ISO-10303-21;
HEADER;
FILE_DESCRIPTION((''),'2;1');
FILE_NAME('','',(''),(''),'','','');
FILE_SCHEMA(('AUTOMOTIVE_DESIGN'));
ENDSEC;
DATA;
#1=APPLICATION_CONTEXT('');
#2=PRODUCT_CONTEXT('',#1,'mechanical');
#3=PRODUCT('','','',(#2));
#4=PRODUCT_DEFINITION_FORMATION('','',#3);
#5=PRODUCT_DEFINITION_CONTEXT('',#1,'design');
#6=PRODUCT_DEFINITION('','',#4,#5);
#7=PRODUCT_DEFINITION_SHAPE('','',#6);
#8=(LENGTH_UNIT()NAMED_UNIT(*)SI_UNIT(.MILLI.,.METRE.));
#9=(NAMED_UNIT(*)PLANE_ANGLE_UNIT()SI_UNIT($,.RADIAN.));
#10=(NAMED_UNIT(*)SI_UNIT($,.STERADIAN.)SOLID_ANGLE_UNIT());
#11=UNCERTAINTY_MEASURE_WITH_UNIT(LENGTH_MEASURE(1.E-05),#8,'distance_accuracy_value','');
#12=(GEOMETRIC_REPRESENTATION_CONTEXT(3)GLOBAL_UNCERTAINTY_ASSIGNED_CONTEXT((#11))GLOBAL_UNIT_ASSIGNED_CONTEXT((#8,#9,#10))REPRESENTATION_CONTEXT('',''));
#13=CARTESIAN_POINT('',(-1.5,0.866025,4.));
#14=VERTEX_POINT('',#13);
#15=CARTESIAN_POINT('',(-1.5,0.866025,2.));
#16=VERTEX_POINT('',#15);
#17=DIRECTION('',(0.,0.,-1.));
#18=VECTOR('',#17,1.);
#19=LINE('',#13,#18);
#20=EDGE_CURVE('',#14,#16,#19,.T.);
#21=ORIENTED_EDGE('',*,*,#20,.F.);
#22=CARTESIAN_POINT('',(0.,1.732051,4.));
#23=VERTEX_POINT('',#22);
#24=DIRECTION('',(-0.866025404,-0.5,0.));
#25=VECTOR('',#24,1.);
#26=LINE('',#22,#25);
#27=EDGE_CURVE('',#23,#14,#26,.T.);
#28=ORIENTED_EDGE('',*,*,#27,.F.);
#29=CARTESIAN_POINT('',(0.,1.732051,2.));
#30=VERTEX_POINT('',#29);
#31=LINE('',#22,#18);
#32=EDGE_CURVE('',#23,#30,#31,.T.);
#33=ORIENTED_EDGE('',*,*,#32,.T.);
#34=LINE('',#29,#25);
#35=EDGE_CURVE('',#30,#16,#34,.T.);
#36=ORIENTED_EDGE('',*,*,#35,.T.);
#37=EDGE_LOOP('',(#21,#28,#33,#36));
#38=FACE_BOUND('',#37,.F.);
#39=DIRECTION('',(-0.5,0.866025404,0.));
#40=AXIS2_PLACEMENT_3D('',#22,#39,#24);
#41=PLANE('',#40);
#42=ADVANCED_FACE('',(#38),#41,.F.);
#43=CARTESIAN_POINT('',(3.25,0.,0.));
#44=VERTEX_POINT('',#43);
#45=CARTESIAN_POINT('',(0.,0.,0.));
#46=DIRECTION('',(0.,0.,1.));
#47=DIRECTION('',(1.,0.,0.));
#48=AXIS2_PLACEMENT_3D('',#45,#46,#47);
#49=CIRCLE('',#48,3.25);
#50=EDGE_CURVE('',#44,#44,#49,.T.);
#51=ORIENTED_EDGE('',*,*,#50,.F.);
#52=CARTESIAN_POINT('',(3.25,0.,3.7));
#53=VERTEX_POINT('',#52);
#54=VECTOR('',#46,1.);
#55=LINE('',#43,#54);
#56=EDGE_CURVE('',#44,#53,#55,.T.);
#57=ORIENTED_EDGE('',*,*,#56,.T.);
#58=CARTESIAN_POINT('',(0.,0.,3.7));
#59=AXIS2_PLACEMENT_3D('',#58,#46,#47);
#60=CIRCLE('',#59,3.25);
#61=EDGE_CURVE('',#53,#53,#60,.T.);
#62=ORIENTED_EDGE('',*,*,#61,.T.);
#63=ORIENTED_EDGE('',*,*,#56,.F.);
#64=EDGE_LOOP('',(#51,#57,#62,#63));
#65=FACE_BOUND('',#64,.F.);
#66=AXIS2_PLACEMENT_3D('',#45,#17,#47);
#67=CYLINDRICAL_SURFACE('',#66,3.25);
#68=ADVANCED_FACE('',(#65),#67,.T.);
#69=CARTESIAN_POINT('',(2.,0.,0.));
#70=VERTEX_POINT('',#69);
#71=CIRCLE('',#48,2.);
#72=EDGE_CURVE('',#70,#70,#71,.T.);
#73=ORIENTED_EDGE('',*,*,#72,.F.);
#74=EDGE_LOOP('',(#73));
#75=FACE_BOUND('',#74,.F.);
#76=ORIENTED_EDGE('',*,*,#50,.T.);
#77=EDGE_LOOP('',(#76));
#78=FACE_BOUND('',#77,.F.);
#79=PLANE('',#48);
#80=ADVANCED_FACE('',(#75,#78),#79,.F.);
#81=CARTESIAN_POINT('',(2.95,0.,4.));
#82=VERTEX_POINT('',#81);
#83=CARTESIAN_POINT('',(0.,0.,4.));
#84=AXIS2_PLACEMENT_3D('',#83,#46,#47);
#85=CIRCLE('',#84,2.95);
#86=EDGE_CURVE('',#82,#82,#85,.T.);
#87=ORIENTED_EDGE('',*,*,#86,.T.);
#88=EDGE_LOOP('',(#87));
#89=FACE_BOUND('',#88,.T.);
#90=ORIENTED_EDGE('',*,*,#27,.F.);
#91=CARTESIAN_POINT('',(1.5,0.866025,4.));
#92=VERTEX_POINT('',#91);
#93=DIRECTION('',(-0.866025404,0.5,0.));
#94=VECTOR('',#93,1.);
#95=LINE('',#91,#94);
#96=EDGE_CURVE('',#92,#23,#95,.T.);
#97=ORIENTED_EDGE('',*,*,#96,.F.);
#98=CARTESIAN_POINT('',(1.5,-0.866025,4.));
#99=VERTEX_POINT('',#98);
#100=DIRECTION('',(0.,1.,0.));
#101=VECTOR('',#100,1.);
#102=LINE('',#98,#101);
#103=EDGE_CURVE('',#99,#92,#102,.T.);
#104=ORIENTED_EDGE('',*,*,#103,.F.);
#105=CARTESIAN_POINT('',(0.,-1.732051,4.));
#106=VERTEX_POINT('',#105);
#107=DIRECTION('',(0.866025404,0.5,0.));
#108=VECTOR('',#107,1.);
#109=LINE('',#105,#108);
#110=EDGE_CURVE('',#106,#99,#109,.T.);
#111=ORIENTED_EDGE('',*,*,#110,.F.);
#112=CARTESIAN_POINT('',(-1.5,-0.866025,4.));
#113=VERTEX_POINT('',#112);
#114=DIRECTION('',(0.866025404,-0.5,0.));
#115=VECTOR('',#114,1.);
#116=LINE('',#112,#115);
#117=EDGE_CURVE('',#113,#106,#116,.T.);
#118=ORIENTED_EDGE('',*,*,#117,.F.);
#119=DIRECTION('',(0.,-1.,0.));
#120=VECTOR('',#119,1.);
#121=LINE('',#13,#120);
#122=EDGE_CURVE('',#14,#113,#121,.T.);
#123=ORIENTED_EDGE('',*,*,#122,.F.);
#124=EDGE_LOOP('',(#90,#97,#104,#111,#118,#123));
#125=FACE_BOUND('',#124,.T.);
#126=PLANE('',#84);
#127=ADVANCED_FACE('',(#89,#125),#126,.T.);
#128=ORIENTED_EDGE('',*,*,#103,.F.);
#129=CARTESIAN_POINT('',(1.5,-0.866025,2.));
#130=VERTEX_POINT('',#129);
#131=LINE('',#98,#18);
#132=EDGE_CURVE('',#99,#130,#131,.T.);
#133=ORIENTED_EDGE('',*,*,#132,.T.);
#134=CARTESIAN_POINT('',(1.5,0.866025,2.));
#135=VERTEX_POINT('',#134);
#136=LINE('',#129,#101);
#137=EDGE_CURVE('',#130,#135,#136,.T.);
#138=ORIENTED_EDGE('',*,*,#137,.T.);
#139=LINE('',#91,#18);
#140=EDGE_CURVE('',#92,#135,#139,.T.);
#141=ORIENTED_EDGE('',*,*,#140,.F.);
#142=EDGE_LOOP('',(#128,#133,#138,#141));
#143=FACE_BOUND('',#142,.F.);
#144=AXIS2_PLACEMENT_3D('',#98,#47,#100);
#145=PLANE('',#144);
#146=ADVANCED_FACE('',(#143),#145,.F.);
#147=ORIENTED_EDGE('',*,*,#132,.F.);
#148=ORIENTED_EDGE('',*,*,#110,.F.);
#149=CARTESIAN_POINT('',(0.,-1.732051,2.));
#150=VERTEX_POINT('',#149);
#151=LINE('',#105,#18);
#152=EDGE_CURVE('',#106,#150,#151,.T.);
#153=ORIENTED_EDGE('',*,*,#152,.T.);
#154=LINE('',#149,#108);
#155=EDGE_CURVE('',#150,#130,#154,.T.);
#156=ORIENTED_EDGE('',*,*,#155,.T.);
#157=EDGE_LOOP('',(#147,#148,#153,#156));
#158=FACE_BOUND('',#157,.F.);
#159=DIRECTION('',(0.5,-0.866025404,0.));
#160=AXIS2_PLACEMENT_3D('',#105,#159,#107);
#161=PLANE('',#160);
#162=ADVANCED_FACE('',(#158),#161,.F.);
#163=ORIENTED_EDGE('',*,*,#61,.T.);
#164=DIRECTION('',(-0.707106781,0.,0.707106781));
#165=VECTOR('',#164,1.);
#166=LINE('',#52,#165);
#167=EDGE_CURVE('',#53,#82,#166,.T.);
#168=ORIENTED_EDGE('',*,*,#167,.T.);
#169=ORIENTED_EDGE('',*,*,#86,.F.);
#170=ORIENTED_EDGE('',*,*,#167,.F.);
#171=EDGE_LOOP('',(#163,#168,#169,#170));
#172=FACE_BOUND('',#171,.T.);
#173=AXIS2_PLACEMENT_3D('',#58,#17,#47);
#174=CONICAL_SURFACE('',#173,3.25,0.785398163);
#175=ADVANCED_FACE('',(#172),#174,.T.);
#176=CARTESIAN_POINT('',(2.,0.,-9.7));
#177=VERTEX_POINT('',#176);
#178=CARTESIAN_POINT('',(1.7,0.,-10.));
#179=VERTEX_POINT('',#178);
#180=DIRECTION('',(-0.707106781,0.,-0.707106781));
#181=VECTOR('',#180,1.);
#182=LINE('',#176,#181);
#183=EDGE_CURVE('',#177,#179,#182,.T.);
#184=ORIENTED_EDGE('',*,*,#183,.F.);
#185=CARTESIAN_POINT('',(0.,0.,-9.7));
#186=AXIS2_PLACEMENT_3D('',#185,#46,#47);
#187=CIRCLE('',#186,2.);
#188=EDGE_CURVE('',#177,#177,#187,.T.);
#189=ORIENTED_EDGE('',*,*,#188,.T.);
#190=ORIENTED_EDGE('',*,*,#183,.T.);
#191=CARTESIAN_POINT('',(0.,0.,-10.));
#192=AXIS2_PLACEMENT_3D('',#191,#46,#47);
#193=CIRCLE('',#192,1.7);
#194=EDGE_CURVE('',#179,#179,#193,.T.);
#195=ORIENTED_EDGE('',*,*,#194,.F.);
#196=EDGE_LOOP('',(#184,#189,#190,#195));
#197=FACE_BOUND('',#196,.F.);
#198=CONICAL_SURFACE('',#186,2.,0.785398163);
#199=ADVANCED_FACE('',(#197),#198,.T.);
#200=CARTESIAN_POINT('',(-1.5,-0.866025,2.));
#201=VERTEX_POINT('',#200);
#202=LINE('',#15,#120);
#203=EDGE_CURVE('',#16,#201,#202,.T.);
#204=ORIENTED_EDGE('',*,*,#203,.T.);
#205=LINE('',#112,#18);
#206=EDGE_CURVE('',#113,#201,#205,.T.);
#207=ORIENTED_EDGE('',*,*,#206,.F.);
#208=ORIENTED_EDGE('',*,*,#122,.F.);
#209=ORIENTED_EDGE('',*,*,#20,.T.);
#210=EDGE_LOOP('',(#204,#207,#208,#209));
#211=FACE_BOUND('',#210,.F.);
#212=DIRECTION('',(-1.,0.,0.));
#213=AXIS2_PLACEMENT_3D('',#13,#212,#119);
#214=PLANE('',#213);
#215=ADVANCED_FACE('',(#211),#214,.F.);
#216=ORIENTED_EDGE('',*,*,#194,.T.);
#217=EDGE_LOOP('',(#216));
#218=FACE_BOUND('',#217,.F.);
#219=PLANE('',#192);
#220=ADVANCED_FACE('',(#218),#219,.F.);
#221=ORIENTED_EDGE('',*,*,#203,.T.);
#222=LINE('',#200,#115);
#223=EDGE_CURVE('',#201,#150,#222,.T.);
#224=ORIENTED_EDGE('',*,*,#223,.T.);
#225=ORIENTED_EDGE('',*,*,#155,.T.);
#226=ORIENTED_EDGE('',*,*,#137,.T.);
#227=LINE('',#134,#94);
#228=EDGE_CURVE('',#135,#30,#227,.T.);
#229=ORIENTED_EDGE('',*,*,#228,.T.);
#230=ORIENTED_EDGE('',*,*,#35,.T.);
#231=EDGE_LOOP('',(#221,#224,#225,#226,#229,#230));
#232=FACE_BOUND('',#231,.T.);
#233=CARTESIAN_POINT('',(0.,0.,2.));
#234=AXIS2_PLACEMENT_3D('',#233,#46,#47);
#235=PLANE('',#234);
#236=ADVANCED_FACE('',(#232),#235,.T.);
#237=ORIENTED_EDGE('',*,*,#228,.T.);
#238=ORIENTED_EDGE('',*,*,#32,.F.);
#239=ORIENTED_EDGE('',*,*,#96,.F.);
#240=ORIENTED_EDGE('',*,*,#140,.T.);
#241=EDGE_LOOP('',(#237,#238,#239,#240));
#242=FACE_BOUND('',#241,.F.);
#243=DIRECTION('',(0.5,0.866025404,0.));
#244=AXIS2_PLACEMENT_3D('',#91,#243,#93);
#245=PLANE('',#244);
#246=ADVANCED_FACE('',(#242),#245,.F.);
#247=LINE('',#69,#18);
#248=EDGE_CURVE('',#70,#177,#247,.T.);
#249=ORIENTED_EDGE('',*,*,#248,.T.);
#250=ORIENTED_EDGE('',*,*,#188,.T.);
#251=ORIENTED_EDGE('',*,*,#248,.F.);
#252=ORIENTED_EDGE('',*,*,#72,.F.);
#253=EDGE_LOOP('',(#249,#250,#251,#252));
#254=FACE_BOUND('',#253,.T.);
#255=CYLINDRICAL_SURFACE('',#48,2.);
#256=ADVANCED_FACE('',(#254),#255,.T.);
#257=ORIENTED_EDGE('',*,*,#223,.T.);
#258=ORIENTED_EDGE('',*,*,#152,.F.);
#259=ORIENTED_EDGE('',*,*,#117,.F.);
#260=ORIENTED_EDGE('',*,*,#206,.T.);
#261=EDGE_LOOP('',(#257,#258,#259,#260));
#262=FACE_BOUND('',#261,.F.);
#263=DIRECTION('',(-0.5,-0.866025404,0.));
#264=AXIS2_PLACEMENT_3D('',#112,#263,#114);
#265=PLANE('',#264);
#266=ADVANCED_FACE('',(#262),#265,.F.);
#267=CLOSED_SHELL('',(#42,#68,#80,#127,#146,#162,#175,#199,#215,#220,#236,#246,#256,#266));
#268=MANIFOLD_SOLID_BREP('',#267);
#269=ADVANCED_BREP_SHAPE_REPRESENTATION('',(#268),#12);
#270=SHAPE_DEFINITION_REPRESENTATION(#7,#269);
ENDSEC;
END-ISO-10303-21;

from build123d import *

# Parameters (mm, degrees)
F2_R      = 2
F3_DEPTH  = 10
F2_R_2    = 3.25
F3_FACE_R = 2
F4_DEPTH  = 4
F5_SIZE   = 0.3
F7_DEPTH  = 2


with BuildPart() as f3:
    # F2 (on Top) → F3 (new body)
    with BuildSketch(Plane.XY):
        Circle(F2_R)
    extrude(amount=-F3_DEPTH)

    # F2 (on Top) + F3_face (on face) → F4 (join)
    with BuildSketch(Plane.XY):
        Circle(F2_R_2)
        Circle(F2_R, mode=Mode.SUBTRACT)
    with BuildSketch(Plane.XY):
        Circle(F3_FACE_R)
    extrude(amount=F4_DEPTH)

    # F5
    f5_edges = [f3.edges().sort_by_distance(p)[0] for p in [
        (-2, 0, -10),
        (-3.25, 0, 4),
    ]]
    chamfer(f5_edges, length=F5_SIZE)

    # F6 (on face) → F7 (cut)
    with BuildSketch(Plane.XY.offset(4)):
        Polygon((1.5, -0.8660254038), (1.5, 0.8660254038), (0, 1.7320508076), (-1.5, 0.8660254038), (-1.5, -0.8660254038), (0, -1.7320508076), align=None)
    extrude(amount=-F7_DEPTH, mode=Mode.SUBTRACT)


solid = f3.part
